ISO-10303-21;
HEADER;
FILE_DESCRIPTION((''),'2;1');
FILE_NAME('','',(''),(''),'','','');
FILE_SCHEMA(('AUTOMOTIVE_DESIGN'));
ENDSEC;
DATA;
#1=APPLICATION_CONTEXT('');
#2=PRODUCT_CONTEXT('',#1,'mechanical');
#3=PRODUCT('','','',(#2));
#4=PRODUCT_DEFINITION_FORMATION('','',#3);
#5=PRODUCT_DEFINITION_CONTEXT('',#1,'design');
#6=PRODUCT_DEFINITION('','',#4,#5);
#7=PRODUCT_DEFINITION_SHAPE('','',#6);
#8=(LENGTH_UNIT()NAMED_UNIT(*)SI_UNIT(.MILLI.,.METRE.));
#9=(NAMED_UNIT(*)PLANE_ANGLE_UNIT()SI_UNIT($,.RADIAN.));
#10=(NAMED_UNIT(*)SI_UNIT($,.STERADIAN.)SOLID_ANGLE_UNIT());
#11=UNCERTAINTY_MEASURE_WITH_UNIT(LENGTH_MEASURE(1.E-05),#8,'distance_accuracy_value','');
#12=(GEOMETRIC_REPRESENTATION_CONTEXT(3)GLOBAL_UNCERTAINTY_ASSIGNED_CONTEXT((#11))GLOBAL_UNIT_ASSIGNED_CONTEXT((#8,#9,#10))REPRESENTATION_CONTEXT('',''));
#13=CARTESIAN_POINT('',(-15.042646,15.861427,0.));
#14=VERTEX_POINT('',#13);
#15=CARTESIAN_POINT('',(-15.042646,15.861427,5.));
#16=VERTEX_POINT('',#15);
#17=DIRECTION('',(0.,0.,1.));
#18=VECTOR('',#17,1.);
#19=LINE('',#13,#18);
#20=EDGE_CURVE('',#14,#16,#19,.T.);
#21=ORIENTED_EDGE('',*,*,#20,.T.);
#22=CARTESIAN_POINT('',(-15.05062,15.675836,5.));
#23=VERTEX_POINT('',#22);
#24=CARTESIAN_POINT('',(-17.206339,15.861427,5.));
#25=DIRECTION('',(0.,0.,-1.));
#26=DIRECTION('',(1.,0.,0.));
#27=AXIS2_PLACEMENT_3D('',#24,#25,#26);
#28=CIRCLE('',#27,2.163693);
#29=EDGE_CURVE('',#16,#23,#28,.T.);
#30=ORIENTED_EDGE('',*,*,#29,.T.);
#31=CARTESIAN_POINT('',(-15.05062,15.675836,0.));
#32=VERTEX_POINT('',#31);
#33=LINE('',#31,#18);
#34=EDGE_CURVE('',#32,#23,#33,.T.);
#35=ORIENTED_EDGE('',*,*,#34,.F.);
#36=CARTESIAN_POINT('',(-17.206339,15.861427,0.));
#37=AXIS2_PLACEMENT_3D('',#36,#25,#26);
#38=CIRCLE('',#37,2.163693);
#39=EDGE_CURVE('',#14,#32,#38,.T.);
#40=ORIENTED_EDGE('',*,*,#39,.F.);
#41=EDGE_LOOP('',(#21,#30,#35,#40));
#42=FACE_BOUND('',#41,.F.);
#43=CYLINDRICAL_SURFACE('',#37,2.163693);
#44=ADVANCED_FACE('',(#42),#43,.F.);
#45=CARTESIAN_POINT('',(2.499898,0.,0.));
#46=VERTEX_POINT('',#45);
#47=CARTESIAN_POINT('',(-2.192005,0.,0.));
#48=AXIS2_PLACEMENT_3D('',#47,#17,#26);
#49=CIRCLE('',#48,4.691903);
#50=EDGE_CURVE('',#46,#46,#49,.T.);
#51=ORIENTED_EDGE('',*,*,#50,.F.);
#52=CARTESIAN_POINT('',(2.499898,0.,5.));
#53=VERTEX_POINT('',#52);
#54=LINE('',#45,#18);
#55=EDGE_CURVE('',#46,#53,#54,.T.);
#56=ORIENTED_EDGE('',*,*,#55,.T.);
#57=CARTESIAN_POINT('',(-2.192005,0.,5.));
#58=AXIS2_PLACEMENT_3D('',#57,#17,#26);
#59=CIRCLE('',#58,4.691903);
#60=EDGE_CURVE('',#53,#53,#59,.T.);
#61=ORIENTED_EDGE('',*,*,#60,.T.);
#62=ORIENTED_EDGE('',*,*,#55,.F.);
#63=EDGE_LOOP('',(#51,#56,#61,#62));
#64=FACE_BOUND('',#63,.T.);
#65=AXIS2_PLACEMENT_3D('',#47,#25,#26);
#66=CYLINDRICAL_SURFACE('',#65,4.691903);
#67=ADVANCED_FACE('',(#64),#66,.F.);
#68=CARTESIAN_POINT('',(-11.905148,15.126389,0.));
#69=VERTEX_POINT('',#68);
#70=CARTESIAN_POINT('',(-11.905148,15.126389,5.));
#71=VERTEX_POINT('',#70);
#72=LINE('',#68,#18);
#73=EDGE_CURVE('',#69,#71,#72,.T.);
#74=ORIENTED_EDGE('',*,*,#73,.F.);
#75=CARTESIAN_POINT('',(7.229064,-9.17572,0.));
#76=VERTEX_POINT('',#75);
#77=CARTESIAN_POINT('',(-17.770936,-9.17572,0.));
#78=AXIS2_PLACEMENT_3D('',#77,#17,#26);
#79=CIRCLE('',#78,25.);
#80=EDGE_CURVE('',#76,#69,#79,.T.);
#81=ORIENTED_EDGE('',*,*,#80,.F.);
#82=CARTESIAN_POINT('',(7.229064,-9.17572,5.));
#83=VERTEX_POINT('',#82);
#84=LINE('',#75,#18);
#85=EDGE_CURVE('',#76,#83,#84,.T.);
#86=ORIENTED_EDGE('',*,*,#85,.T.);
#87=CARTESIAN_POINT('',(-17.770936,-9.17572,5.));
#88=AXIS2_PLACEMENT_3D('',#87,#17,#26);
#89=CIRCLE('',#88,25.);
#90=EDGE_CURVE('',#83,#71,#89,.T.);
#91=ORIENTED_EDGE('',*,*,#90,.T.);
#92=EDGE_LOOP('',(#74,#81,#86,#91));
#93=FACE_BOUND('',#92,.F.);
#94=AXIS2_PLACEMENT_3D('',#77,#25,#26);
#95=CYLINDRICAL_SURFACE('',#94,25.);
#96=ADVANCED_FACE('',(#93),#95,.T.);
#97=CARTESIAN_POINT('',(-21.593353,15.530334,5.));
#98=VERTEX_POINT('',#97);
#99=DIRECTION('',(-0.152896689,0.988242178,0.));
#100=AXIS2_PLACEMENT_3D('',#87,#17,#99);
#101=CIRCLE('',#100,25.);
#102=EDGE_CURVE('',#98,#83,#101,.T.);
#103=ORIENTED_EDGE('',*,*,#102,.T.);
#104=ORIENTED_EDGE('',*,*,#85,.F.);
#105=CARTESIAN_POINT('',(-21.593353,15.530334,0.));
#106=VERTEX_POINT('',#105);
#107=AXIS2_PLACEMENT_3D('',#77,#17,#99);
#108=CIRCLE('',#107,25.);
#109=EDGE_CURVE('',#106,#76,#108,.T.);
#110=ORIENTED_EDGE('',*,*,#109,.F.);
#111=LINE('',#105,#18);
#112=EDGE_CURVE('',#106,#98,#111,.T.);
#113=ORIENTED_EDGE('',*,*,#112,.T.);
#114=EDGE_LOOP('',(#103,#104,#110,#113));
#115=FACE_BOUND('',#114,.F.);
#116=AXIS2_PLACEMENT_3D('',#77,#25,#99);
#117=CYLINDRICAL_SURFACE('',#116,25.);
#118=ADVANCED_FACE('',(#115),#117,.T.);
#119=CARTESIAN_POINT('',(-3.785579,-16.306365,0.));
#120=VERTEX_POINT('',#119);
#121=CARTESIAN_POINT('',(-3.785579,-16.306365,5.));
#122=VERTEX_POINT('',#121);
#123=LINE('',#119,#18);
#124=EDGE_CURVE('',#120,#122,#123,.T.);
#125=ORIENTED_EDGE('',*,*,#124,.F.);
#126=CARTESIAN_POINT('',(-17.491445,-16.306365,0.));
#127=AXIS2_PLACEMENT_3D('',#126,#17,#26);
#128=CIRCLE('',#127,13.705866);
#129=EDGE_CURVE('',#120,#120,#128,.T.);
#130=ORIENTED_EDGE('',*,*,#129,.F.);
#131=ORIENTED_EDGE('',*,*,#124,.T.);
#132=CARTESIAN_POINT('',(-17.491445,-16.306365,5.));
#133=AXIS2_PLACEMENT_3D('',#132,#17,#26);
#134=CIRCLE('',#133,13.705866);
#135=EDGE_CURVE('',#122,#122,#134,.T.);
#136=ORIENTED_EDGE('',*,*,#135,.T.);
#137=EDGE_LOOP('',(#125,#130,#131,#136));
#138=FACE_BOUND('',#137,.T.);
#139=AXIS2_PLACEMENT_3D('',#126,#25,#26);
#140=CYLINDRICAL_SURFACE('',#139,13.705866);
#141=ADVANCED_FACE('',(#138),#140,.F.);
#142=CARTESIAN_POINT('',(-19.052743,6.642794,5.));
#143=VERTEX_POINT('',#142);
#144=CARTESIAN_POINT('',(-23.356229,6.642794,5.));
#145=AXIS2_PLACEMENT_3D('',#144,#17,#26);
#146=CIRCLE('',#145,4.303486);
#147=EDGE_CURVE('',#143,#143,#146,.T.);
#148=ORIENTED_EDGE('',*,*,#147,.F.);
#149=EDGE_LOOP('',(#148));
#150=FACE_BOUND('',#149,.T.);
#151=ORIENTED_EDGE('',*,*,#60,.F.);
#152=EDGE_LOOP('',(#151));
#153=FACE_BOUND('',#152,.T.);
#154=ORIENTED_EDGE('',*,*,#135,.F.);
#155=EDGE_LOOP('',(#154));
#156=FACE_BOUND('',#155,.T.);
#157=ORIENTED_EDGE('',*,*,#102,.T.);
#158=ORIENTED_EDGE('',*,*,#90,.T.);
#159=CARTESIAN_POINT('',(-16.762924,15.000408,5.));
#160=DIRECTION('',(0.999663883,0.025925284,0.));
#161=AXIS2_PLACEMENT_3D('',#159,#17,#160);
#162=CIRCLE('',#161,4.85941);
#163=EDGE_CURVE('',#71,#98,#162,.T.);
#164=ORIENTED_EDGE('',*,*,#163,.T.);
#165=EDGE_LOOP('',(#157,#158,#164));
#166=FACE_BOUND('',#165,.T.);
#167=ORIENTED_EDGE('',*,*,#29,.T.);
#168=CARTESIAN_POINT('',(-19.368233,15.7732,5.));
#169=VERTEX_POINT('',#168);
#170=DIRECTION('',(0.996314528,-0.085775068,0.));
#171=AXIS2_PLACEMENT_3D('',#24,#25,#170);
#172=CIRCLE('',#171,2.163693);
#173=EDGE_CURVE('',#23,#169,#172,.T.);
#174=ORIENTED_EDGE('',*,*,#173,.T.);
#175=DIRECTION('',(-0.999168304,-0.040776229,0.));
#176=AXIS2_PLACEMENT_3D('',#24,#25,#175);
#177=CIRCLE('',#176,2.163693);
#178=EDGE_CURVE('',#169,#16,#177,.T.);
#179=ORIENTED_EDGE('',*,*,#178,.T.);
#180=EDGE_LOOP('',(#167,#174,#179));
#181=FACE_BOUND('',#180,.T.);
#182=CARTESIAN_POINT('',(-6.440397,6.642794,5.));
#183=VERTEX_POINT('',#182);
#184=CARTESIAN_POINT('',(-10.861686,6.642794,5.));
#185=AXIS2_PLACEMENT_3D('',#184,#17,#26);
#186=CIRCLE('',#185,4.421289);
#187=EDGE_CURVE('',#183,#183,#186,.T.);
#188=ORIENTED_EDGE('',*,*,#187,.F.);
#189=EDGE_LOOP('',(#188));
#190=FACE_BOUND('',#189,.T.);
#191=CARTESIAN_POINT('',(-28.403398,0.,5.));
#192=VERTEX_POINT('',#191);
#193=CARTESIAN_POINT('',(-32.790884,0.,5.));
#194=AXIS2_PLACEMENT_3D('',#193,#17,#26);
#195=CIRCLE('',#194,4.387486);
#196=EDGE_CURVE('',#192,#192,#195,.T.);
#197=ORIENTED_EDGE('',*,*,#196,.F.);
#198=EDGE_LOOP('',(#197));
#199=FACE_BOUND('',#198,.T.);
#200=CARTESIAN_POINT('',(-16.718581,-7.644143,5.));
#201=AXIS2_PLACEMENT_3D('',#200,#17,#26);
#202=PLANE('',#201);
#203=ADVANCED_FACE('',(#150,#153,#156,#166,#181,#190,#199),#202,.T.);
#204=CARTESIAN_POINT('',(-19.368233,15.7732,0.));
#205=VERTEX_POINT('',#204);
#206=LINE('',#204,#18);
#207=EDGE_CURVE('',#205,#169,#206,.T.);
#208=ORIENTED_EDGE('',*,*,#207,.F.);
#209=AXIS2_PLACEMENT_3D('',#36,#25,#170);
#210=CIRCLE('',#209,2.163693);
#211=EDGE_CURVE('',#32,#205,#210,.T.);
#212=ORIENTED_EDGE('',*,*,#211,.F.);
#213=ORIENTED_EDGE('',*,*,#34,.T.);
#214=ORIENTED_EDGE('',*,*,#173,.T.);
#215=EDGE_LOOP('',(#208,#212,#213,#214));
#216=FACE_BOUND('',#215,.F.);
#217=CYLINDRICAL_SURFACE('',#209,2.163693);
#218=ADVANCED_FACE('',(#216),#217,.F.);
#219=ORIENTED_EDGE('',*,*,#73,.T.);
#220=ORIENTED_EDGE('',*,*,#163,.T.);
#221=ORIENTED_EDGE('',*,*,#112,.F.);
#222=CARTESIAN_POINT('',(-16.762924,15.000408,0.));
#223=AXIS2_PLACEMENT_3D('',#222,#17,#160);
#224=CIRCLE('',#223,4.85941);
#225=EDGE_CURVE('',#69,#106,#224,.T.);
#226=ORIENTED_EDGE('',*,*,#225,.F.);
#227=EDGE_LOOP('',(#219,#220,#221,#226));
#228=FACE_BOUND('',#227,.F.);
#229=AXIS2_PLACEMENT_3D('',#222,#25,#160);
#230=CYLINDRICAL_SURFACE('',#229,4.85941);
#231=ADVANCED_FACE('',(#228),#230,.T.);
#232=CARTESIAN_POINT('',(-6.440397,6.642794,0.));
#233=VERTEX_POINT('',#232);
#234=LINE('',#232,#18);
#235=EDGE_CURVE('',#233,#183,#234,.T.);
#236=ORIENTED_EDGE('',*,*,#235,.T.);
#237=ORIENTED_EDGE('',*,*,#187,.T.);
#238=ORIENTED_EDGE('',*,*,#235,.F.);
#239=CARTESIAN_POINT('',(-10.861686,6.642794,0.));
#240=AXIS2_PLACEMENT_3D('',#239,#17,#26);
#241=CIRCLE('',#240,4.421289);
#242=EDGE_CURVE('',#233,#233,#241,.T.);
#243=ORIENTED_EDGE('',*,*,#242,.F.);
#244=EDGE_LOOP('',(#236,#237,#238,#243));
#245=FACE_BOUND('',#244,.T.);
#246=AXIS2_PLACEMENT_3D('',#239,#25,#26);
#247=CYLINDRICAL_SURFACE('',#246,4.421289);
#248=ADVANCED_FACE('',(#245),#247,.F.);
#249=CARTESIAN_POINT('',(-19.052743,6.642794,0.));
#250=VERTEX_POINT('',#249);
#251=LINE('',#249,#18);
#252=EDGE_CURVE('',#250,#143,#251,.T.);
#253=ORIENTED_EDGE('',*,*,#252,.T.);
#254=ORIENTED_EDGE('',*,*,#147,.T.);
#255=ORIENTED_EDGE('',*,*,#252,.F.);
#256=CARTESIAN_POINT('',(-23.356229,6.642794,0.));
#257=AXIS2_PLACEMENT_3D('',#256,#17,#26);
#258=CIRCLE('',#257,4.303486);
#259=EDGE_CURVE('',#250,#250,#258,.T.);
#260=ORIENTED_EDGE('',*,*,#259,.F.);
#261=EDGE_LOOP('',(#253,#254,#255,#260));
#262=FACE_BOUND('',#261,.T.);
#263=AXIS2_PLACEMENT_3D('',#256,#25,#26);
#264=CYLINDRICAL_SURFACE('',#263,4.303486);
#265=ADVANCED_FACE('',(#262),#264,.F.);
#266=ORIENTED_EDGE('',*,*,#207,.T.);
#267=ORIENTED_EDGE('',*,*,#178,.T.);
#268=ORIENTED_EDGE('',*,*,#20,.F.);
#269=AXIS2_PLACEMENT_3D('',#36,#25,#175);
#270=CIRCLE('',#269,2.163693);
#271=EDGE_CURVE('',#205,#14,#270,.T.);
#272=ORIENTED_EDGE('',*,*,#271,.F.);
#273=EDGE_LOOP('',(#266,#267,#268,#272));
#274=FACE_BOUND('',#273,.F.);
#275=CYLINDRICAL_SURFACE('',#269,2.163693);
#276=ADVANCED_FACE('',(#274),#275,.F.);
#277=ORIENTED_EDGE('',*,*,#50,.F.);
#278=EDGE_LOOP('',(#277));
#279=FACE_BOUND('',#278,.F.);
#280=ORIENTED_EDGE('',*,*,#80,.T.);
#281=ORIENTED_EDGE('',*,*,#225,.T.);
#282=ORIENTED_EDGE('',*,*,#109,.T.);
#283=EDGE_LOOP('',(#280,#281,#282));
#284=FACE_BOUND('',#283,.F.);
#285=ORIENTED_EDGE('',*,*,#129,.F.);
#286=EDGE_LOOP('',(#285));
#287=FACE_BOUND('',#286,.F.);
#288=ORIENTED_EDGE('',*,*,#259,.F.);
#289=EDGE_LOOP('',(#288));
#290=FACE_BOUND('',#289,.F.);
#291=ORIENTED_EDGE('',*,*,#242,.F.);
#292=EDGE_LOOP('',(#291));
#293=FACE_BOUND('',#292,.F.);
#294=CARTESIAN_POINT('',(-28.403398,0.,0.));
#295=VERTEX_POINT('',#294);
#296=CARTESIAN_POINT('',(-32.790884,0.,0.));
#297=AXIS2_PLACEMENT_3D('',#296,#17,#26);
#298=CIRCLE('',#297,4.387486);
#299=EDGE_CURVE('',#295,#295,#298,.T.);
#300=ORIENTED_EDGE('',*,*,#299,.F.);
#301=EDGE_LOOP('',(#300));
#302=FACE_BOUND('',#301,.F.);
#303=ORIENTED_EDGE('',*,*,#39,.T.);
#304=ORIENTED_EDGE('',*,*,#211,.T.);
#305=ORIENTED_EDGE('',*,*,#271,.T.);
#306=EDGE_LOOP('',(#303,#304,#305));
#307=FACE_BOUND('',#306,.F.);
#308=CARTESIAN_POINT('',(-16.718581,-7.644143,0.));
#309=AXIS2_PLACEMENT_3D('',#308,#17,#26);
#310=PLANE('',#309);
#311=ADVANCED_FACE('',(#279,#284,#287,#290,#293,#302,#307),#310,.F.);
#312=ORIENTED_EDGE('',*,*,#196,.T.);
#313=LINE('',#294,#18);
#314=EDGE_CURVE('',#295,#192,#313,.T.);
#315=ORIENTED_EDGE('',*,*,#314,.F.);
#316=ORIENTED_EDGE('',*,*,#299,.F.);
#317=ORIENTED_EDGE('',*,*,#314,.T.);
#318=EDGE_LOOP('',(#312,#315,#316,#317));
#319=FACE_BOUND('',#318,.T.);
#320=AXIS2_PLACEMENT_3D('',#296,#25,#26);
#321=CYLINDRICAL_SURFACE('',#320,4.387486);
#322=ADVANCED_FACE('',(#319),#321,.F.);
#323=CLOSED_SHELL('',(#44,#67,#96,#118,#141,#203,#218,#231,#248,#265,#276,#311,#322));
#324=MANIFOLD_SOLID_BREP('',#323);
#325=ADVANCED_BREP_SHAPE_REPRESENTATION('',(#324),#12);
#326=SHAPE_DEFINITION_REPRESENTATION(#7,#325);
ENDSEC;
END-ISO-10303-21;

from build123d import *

# Parameters (mm, degrees)
F0_R     = 13.705866293
F0_R_2   = 4.3874864706
F0_R_3   = 4.303486485
F0_R_4   = 4.6919029461
F0_R_5   = 4.4212893062
F1_DEPTH = 5


# Not quite as in the source:
# - a feature names something its author has since deleted; it is built from what else it names


with BuildPart() as f1:
    # F0 (on Top) → F1 (new body)
    with BuildSketch(Plane.XY):
        with BuildLine():
            ThreePointArc((-21.5933528567, 15.5303339684), (-34.0411472206, -28.1567693277), (7.2290643581, -9.1757204846))
            ThreePointArc((7.2290643581, -9.1757204846), (1.8714254099, 6.2896489682), (-11.9051478269, 15.1263891627))
            ThreePointArc((-11.9051478269, 15.1263891627), (-13.4691027147, 15.4513831507), (-15.0506199283, 15.6758364569))
            ThreePointArc((-15.0506199283, 15.6758364569), (-17.255118812, 13.6982838706), (-19.3682330997, 15.77320015))
            ThreePointArc((-19.3682330997, 15.77320015), (-20.4835124203, 15.6766823614), (-21.5933528567, 15.5303339684))
        make_face()
        with Locations((-17.4914449453, -16.3063649088)):
            Circle(F0_R, mode=Mode.SUBTRACT)
        with Locations((-32.7908843756, 0)):
            Circle(F0_R_2, mode=Mode.SUBTRACT)
        with Locations((-23.3562290668, 6.6427942365)):
            Circle(F0_R_3, mode=Mode.SUBTRACT)
        with Locations((-2.1920050494, 0)):
            Circle(F0_R_4, mode=Mode.SUBTRACT)
        with Locations((-10.8616864309, 6.6427942365)):
            Circle(F0_R_5, mode=Mode.SUBTRACT)
        with BuildLine():
            ThreePointArc((-15.0506199283, 15.6758364569), (-13.4691027147, 15.4513831507), (-11.9051478269, 15.1263891627))
            ThreePointArc((-11.9051478269, 15.1263891627), (-16.560489471, 19.8555989303), (-21.5933528567, 15.5303339684))
            ThreePointArc((-21.5933528567, 15.5303339684), (-20.4835124203, 15.6766823614), (-19.3682330997, 15.77320015))
            ThreePointArc((-19.3682330997, 15.77320015), (-17.2504619715, 18.0246709507), (-15.0426456956, 15.8614274114))
            ThreePointArc((-15.0426456956, 15.8614274114), (-15.044640173, 15.768546317), (-15.0506199283, 15.6758364569))
        make_face()
    extrude(amount=F1_DEPTH)


solid = f1.part
